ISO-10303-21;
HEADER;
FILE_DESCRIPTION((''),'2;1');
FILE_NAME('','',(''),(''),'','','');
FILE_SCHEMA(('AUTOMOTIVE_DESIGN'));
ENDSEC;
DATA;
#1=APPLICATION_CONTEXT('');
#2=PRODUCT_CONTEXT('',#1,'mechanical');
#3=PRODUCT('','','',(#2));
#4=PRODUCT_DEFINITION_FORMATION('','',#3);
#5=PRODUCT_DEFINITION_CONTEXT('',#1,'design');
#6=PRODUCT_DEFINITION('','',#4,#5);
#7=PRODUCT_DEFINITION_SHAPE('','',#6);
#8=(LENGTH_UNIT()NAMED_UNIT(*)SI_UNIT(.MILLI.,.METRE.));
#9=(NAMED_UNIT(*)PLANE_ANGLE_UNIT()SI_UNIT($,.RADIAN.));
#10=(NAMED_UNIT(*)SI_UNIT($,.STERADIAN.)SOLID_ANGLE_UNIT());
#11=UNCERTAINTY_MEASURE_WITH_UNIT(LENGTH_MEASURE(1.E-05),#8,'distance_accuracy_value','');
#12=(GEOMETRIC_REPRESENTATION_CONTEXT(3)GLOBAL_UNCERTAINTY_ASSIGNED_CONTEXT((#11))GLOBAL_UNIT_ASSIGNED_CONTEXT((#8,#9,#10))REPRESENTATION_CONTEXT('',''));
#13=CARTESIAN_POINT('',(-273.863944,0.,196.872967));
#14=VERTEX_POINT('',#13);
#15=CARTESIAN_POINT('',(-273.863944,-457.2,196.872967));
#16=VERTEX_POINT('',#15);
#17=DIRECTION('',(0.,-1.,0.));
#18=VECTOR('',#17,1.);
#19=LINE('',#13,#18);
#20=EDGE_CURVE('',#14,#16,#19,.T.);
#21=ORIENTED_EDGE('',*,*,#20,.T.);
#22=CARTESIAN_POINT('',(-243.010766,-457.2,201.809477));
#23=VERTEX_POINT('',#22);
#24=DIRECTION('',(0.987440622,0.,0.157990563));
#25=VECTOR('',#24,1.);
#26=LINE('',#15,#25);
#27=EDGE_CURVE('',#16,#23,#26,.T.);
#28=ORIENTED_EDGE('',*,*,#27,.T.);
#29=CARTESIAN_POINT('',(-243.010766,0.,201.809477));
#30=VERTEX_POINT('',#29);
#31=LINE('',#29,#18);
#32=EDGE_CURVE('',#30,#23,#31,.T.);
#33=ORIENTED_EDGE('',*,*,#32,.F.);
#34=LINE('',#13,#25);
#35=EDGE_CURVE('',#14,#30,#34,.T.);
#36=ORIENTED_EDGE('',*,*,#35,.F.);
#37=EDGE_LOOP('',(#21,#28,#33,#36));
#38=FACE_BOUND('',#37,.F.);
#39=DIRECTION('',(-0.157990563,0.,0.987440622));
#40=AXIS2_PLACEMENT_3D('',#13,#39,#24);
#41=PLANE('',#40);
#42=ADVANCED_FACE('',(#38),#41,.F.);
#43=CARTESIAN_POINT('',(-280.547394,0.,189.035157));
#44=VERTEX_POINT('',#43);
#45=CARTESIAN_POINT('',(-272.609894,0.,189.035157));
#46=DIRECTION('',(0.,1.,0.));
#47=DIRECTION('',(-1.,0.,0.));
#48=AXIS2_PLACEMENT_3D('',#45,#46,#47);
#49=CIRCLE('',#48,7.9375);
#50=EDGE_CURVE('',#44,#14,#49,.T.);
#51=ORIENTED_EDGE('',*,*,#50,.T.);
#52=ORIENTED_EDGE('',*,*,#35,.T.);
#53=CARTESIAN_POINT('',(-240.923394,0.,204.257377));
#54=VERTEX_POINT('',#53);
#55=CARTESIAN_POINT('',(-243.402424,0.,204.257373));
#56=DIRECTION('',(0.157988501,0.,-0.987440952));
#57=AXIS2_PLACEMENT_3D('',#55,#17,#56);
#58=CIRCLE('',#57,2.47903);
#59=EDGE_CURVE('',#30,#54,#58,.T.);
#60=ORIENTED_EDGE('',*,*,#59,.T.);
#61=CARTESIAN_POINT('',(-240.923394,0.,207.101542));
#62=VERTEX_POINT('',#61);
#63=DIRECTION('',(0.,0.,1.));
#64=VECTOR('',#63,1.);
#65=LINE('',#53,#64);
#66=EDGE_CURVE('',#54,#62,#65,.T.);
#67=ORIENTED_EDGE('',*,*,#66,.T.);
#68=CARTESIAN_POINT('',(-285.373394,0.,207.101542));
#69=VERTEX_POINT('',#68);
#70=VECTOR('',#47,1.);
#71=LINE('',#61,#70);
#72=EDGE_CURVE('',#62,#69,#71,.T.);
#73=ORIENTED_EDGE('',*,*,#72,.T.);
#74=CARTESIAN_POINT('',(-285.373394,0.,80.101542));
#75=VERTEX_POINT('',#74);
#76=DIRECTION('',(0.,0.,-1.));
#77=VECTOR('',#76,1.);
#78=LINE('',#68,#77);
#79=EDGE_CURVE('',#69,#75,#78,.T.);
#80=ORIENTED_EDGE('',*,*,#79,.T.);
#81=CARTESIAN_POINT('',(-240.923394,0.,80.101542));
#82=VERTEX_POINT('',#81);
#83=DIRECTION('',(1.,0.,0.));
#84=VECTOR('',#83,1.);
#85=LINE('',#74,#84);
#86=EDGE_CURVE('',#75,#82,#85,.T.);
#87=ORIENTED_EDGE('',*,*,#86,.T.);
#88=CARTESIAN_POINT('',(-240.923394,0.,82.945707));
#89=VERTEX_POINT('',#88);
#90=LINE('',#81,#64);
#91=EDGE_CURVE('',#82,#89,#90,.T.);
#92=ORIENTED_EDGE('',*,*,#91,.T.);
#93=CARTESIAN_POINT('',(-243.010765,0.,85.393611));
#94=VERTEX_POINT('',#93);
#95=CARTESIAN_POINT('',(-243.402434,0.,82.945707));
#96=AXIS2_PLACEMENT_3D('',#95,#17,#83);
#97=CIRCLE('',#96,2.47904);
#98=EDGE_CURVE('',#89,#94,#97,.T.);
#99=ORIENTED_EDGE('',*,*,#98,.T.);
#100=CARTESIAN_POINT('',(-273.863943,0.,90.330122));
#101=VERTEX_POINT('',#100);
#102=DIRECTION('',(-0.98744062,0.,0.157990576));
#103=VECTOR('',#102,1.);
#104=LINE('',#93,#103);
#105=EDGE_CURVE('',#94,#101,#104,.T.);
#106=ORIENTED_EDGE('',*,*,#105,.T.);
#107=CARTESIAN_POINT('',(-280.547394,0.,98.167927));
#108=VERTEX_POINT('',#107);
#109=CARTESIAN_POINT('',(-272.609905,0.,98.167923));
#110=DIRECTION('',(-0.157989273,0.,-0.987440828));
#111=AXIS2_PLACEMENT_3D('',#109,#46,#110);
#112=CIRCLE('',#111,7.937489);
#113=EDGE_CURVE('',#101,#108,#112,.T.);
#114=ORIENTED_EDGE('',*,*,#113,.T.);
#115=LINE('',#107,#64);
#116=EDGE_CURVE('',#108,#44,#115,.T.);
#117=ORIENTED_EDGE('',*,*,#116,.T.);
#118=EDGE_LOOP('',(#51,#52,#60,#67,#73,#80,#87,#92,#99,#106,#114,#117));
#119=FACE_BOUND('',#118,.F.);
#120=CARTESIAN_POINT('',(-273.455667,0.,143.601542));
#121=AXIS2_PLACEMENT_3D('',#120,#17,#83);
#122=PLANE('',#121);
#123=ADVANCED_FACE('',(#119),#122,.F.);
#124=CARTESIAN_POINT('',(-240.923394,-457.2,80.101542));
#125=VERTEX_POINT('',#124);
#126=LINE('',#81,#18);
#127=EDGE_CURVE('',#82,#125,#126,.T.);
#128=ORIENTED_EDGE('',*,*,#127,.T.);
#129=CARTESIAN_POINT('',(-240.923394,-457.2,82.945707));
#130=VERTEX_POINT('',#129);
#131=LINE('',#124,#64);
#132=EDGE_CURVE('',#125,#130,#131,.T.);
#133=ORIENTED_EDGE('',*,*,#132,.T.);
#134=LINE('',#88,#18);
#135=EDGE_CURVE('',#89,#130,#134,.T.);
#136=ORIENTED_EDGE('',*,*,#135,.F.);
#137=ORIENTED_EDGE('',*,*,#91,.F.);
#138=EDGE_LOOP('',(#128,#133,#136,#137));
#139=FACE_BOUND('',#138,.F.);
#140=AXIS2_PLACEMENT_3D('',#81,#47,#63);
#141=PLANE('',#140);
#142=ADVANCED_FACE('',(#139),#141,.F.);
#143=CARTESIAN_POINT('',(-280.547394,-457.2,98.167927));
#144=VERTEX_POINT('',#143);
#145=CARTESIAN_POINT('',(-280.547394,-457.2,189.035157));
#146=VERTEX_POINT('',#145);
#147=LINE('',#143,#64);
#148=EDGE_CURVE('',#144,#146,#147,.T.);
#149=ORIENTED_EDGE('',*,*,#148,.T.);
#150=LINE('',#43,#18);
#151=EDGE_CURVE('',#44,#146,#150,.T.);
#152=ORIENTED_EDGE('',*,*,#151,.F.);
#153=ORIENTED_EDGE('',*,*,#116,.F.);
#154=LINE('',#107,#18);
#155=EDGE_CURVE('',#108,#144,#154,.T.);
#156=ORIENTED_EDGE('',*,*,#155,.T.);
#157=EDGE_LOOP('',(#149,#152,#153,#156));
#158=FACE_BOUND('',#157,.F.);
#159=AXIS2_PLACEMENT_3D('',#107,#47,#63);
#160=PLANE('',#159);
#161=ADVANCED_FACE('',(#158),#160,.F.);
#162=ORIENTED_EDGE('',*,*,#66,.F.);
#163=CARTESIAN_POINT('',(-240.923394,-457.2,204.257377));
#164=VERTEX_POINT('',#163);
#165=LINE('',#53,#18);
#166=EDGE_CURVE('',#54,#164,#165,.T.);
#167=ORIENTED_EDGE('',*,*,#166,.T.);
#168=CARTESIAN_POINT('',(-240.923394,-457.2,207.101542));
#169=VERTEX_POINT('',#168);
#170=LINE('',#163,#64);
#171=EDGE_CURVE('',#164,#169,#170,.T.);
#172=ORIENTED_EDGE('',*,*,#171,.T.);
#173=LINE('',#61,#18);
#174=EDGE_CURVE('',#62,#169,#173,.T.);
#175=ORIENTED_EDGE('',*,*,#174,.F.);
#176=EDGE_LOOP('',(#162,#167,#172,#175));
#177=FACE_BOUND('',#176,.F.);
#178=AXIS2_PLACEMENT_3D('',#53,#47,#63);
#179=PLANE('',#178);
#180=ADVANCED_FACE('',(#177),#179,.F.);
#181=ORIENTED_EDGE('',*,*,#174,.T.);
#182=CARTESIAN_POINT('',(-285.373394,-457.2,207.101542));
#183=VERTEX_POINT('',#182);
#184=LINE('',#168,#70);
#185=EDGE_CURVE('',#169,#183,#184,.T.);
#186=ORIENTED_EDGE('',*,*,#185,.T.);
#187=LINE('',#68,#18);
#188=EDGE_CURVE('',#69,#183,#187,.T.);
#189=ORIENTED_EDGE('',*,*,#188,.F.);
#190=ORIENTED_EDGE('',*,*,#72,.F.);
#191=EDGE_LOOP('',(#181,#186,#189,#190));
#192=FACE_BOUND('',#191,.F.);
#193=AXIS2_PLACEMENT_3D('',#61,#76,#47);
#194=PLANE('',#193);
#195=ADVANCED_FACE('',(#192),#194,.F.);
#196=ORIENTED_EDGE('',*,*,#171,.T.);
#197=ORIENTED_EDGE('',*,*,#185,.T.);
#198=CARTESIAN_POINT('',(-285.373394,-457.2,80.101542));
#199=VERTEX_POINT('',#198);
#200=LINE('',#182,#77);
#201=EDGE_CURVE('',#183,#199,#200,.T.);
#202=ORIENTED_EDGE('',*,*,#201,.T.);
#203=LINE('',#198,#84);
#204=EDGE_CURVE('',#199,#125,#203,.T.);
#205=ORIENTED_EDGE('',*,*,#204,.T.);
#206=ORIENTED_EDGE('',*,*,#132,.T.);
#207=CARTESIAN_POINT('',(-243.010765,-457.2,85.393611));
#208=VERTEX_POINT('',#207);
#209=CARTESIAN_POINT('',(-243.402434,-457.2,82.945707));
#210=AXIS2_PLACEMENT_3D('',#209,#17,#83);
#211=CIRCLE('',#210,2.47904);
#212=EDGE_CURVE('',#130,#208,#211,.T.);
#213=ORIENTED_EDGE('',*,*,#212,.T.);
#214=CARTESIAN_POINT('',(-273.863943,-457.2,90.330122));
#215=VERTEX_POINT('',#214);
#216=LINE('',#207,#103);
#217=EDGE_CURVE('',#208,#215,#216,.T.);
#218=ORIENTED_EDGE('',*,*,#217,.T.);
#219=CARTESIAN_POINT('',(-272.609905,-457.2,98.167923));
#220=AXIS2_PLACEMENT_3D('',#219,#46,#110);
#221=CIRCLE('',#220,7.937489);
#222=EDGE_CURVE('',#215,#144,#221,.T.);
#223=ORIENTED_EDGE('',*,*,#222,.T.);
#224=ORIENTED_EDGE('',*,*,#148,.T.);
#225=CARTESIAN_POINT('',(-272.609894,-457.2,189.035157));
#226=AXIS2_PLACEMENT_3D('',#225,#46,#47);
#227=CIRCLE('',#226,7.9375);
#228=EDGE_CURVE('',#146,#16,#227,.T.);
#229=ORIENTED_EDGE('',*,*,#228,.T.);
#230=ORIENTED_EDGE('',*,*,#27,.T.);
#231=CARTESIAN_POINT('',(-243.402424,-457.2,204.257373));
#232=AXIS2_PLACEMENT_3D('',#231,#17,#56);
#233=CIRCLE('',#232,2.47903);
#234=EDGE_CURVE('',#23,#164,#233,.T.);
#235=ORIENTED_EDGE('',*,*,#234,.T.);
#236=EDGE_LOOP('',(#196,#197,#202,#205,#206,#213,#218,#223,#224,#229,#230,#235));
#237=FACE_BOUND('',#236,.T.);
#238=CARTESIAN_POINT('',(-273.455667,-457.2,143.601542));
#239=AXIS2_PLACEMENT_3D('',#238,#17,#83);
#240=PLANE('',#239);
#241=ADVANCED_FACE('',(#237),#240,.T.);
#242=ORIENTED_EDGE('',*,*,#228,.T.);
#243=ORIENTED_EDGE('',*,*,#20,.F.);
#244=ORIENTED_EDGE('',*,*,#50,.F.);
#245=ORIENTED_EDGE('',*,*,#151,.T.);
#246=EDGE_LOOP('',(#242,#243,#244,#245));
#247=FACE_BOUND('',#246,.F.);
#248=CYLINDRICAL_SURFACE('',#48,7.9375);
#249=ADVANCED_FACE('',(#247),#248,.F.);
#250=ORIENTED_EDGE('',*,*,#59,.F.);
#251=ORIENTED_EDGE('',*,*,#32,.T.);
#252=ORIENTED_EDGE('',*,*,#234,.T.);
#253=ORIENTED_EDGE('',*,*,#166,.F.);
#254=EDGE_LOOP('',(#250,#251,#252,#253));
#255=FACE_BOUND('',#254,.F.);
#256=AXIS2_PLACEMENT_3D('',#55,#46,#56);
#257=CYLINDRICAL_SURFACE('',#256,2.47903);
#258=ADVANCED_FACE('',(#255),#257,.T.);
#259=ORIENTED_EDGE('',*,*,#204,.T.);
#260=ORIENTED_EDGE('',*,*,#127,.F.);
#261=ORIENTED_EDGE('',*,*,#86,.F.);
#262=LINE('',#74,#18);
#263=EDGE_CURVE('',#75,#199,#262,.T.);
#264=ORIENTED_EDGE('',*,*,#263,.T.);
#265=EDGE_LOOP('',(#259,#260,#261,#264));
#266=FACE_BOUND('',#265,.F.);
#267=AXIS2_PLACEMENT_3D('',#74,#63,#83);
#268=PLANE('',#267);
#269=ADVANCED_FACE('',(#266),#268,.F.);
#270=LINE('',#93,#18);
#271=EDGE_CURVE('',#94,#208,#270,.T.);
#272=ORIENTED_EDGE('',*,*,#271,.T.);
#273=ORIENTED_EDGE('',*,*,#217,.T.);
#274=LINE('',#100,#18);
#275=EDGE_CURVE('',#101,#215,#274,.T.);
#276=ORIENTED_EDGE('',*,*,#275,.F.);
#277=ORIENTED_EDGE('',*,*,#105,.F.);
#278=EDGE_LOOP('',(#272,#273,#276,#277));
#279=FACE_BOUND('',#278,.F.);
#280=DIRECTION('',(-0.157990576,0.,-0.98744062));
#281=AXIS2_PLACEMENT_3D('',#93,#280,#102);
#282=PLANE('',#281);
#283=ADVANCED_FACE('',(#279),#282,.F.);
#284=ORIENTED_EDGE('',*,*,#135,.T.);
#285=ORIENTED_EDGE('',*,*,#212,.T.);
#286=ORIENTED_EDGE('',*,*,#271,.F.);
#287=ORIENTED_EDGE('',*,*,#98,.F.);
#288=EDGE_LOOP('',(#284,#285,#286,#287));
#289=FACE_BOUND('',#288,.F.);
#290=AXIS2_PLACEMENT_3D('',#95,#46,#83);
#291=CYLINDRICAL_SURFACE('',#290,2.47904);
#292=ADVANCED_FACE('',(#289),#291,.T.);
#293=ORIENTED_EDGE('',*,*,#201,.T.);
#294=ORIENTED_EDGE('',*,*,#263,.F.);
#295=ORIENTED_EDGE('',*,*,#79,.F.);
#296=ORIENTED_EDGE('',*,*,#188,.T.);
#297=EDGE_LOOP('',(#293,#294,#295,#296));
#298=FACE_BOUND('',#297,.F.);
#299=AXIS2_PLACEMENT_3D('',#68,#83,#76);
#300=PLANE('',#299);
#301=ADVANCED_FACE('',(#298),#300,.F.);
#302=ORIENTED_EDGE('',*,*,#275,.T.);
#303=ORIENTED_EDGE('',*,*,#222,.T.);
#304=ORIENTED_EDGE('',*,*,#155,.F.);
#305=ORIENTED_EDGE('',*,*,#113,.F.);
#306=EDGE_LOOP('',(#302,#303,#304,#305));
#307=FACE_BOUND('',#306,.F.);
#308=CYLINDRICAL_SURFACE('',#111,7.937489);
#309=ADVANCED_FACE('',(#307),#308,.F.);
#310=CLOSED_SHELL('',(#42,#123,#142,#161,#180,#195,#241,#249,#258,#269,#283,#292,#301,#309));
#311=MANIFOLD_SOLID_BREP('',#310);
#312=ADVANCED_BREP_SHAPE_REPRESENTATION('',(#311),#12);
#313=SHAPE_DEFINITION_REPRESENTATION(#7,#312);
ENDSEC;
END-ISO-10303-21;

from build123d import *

# Parameters (mm, degrees)
F1_DEPTH = 457.2
F0_W     = 25.4
F0_H     = 49.170082
F0_H_2   = 8.8030812
F0_H_3   = 4.7118778
F0_W_2   = 31.496
F0_H_4   = 25.4
F0_W_3   = 6.5532254
F0_H_5   = 4.729226
F0_H_6   = 8.769477
F0_H_7   = 49.202594
F0_W_4   = 31.3436
F0_W_5   = 9.0424
F0_H_8   = 4.724908
F0_H_9   = 8.777859
F0_H_10  = 49.194466
F0_H_11  = 4.9884076
F0_H_12  = 10.7895644
F0_H_13  = 70.044056
F0_W_6   = 35.56
F0_W_7   = 8.1534
F0_H_14  = 90.86723
F0_H_15  = 12.7743204
F0_H_16  = 5.2920646
F0_W_8   = 39.6239238
F0_W_9   = 8.2550254
F0_H_17  = 7.9246984
F0_H_18  = 11.1253016
F0_H_19  = 88.9
F0_H_20  = 11.1252762
F0_H_21  = 7.9247238
F0_H_22  = 7.9249016
F0_H_23  = 12.7
F0_H_24  = 111.1501968
F0_W_10  = 46.8120476
F0_W_11  = 7.9756762
F0_H_25  = 111.1505778
F0_W_12  = 55.5499016
F0_W_13  = 7.8739238
F0_H_26  = 11.0997238
F0_H_27  = 9.525
F0_H_28  = 11.0996984
F0_H_29  = 111.1503746
F0_W_14  = 43.6878222
F0_W_15  = 11.0999016
F0_W_16  = 66.675
F0_W_17  = 8.0264508
F0_H_30  = 14.2746984
F0_H_31  = 98.4505778
F0_H_32  = 14.2747238
F0_W_18  = 80.2641016
F0_W_19  = 8.6358984
F0_H_33  = 20.6247238
F0_H_34  = 6.35
F0_H_35  = 20.6246984


# Not quite as in the source:
# - ends of sketch curves that miss each other by under 0.0002 mm in the source are joined


with BuildPart() as f1:
    # F0 (on Front) → F1 (new body)
    with BuildSketch(Plane.XZ):
        with BuildLine():
            Line((-601.1868342, 387.2012576), (-601.1868342, 311.0012576))
            Line((-601.1868342, 311.0012576), (-565.3728342, 311.0012576))
            Line((-565.3728342, 311.0012576), (-565.3728342, 313.5336122))
            ThreePointArc((-565.3728342, 313.5336122), (-565.9005539947, 314.9657928472), (-567.2313750211, 315.7131515187))
            Line((-567.2313750211, 315.7131515187), (-592.8587584, 319.8135336))
            ThreePointArc((-592.8587584, 319.8135336), (-595.7302015679, 321.4260723396), (-596.8688342, 324.5162166))
            Line((-596.8688342, 324.5162166), (-596.8688342, 373.6862986))
            ThreePointArc((-596.8688342, 373.6862986), (-595.7302015679, 376.7764428604), (-592.8587590083, 378.388985402))
            Line((-592.8587590083, 378.388985402), (-567.2313776, 382.4893798))
            ThreePointArc((-567.2313776, 382.4893798), (-565.9005539947, 383.2367223528), (-565.3728342, 384.668903))
            Line((-565.3728342, 384.668903), (-565.3728342, 387.2012576))
            Line((-565.3728342, 387.2012576), (-601.1868342, 387.2012576))
        make_face()
    extrude(amount=F1_DEPTH)


with BuildPart() as f1b:
    # F0 (on Front) → F1, piece 2 (new body)
    with BuildSketch(Plane.XZ):
        Polygon((-490.1583542, 311.0012576), (-458.6623542, 311.0012576), (-458.6623542, 336.4012576), (-490.1583542, 336.4012576), (-490.1583542, 315.3192576), align=None)
        Polygon((-494.4763542, 311.0012576), (-490.1583542, 311.0012576), (-490.1583542, 315.3192576), align=None)
        Polygon((-490.1583542, 315.3192576), (-490.1583542, 336.4012576), (-494.4763542, 336.4012576), (-494.4763542, 311.0012576), align=None)
    extrude(amount=F1_DEPTH)


with BuildPart() as f1c:
    # F0 (on Front) → F1, piece 3 (new body)
    with BuildSketch(Plane.XZ):
        with Locations((-369.8588742, 349.1012576)):
            Rectangle(F0_W, F0_H)
        with Locations((-369.8588742, 378.0878392)):
            Rectangle(F0_W, F0_H_2)
        with Locations((-369.8588742, 384.8453187)):
            Rectangle(F0_W, F0_H_3)
        Polygon((-357.1588742, 315.7131354), (-357.1588742, 324.5162166), (-382.5588742, 324.5162166), (-382.5588742, 315.7131354), (-377.8469964, 315.7131354), align=None)
        Polygon((-357.1588742, 311.0012576), (-357.1588742, 315.7131354), (-377.8469964, 315.7131354), (-382.5588742, 311.0012576), align=None)
        Polygon((-377.8469964, 315.7131354), (-382.5588742, 315.7131354), (-382.5588742, 311.0012576), align=None)
    extrude(amount=F1_DEPTH)


with BuildPart() as f1d:
    # F0 (on Front) → F1, piece 4 (new body)
    with BuildSketch(Plane.XZ):
        with BuildLine():
            Line((-282.0713942, 387.2012576), (-282.0713942, 311.0012576))
            Line((-282.0713942, 311.0012576), (-244.2253942, 311.0012576))
            Line((-244.2253942, 311.0012576), (-244.2253942, 313.542934))
            ThreePointArc((-244.2253942, 313.542934), (-244.755053678, 314.9803842916), (-246.0907679772, 315.7304974926))
            Line((-246.0907679772, 315.7304974926), (-271.5081184, 319.7972776))
            ThreePointArc((-271.5081184, 319.7972776), (-274.3795615679, 321.4098163396), (-275.5181942, 324.4999606))
            Line((-275.5181942, 324.4999606), (-275.5181942, 373.7025546))
            ThreePointArc((-275.5181942, 373.7025546), (-274.3795615679, 376.7926988604), (-271.5081190083, 378.405241402))
            Line((-271.5081190083, 378.405241402), (-246.0907702, 382.4720316))
            ThreePointArc((-246.0907702, 382.4720316), (-244.755053678, 383.2221309084), (-244.2253942, 384.6595812))
            Line((-244.2253942, 384.6595812), (-244.2253942, 387.2012576))
            Line((-244.2253942, 387.2012576), (-282.0713942, 387.2012576))
        make_face()
    extrude(amount=F1_DEPTH)


with BuildPart() as f1e:
    # F0 (on Front) → F1, piece 5 (new body)
    with BuildSketch(Plane.XZ):
        with Locations((-153.1612888, 323.7012576)):
            Rectangle(F0_W_2, F0_H_4)
        with Locations((-172.1859015, 323.7012576)):
            Rectangle(F0_W_3, F0_H_4)
    extrude(amount=F1_DEPTH)


with BuildPart() as f1f:
    # F0 (on Front) → F1, piece 6 (new body)
    with BuildSketch(Plane.XZ):
        with Locations((-49.7274342, 384.8366446)):
            Rectangle(F0_W, F0_H_5)
        with Locations((-49.7274342, 378.0872931)):
            Rectangle(F0_W, F0_H_6)
        with Locations((-49.7274342, 349.1012576)):
            Rectangle(F0_W, F0_H_7)
        Polygon((-37.0274342, 324.4999606), (-62.4274342, 324.4999606), (-62.4274342, 315.7304836), (-57.6982082, 315.7304836), (-37.0274342, 315.7304836), align=None)
        Polygon((-57.6982082, 315.7304836), (-62.4274342, 315.7304836), (-62.4274342, 311.0012576), align=None)
        Polygon((-57.6982082, 315.7304836), (-62.4274342, 311.0012576), (-37.0274342, 311.0012576), (-37.0274342, 315.7304836), align=None)
    extrude(amount=F1_DEPTH)


with BuildPart() as f1g:
    # F0 (on Front) → F1, piece 7 (new body)
    with BuildSketch(Plane.XZ):
        with BuildLine():
            Line((36.7900458, 387.2012576), (36.7900458, 311.0012576))
            Line((36.7900458, 311.0012576), (77.1760458, 311.0012576))
            Line((77.1760458, 311.0012576), (77.1760458, 313.5405972))
            ThreePointArc((77.1760458, 313.5405972), (76.6468679067, 314.9767339928), (75.3123701078, 315.7261562738))
            Line((75.3123701078, 315.7261562738), (49.8425216, 319.8013416))
            ThreePointArc((49.8425216, 319.8013416), (46.9710784321, 321.4138803396), (45.8324458, 324.5040246))
            Line((45.8324458, 324.5040246), (45.8324458, 373.6984906))
            ThreePointArc((45.8324458, 373.6984906), (46.9710784321, 376.7886348604), (49.8425209917, 378.401177402))
            Line((49.8425209917, 378.401177402), (75.3123716, 382.4763496))
            ThreePointArc((75.3123716, 382.4763496), (76.6468679067, 383.2257812072), (77.1760458, 384.661918))
            Line((77.1760458, 384.661918), (77.1760458, 387.2012576))
            Line((77.1760458, 387.2012576), (36.7900458, 387.2012576))
        make_face()
    extrude(amount=F1_DEPTH)


with BuildPart() as f1h:
    # F0 (on Front) → F1, piece 8 (new body)
    with BuildSketch(Plane.XZ):
        with Locations((168.2020258, 323.7012576)):
            Rectangle(F0_W_4, F0_H_4)
        with Locations((148.0090258, 323.7012576)):
            Rectangle(F0_W_5, F0_H_4)
    extrude(amount=F1_DEPTH)


with BuildPart() as f1i:
    # F0 (on Front) → F1, piece 9 (new body)
    with BuildSketch(Plane.XZ):
        with Locations((270.4040058, 384.8388036)):
            Rectangle(F0_W, F0_H_8)
        with Locations((270.4040058, 378.0874201)):
            Rectangle(F0_W, F0_H_9)
        with Locations((270.4040058, 349.1012576)):
            Rectangle(F0_W, F0_H_10)
        Polygon((283.1040058, 324.5040246), (257.7040058, 324.5040246), (257.7040058, 315.7261656), (262.4289138, 315.7261656), (283.1040058, 315.7261656), align=None)
        Polygon((262.4289138, 315.7261656), (257.7040058, 315.7261656), (257.7040058, 311.0012576), align=None)
        Polygon((262.4289138, 315.7261656), (257.7040058, 311.0012576), (283.1040058, 311.0012576), (283.1040058, 315.7261656), align=None)
    extrude(amount=F1_DEPTH)


with BuildPart() as f1j:
    # F0 (on Front) → F1, piece 10 (new body)
    with BuildSketch(Plane.XZ):
        with BuildLine():
            Line((356.9976858, 412.6012576), (356.9976858, 311.0012576))
            Line((356.9976858, 311.0012576), (397.2312858, 311.0012576))
            Line((397.2312858, 311.0012576), (397.2312858, 313.6822276))
            ThreePointArc((397.2312858, 313.6822276), (396.6725971949, 315.1984578291), (395.2636770123, 315.9896790272))
            Line((395.2636770123, 315.9896790272), (367.0180366, 320.5089856))
            ThreePointArc((367.0180366, 320.5089856), (363.1894572183, 322.6590436143), (361.6712858, 326.7792296))
            Line((361.6712858, 326.7792296), (361.6712858, 396.8232856))
            ThreePointArc((361.6712858, 396.8232856), (363.1894572183, 400.9434715857), (367.0180362116, 403.0935320276))
            Line((367.0180362116, 403.0935320276), (395.2636748, 407.61285))
            ThreePointArc((395.2636748, 407.61285), (396.6725971949, 408.4040573709), (397.2312858, 409.9202876))
            Line((397.2312858, 409.9202876), (397.2312858, 412.6012576))
            Line((397.2312858, 412.6012576), (356.9976858, 412.6012576))
        make_face()
    extrude(amount=F1_DEPTH)


with BuildPart() as f1k:
    # F0 (on Front) → F1, piece 11 (new body)
    with BuildSketch(Plane.XZ):
        Polygon((468.3817658, 336.4012576), (463.7081658, 336.4012576), (463.7081658, 311.0012576), (468.3817658, 315.6748576), align=None)
        Polygon((503.9417658, 336.4012576), (468.3817658, 336.4012576), (468.3817658, 315.6748576), (468.3817658, 311.0012576), (503.9417658, 311.0012576), align=None)
        Polygon((468.3817658, 315.6748576), (463.7081658, 311.0012576), (468.3817658, 311.0012576), align=None)
    extrude(amount=F1_DEPTH)


with BuildPart() as f1l:
    # F0 (on Front) → F1, piece 12 (new body)
    with BuildSketch(Plane.XZ):
        with Locations((590.5354458, 410.1070538)):
            Rectangle(F0_W, F0_H_11)
        with Locations((590.5354458, 402.2180678)):
            Rectangle(F0_W, F0_H_12)
        with Locations((590.5354458, 361.8012576)):
            Rectangle(F0_W, F0_H_13)
        Polygon((603.2354458, 315.9896652), (603.2354458, 326.7792296), (577.8354458, 326.7792296), (577.8354458, 315.9896652), (582.8238534, 315.9896652), align=None)
        Polygon((603.2354458, 311.0012576), (603.2354458, 315.9896652), (582.8238534, 315.9896652), (577.8354458, 311.0012576), align=None)
        Polygon((577.8354458, 311.0012576), (582.8238534, 315.9896652), (577.8354458, 315.9896652), align=None)
    extrude(amount=F1_DEPTH)


with BuildPart() as f1m:
    # F0 (on Front) → F1, piece 13 (new body)
    with BuildSketch(Plane.XZ):
        with BuildLine():
            ThreePointArc((-591.6363837884, 89.6092671724), (-595.4649627817, 91.7593276143), (-596.9831342, 95.8795136))
            Line((-596.9831342, 95.8795136), (-596.9831342, 165.9235696))
            ThreePointArc((-596.9831342, 165.9235696), (-595.4649627817, 170.0437555857), (-591.6363837884, 172.1938160276))
            Line((-591.6363837884, 172.1938160276), (-563.3907452, 176.713134))
            ThreePointArc((-563.3907452, 176.713134), (-561.9818228051, 177.5043413709), (-561.4231342, 179.0205716))
            Line((-561.4231342, 179.0205716), (-561.4231342, 181.7015416))
            Line((-561.4231342, 181.7015416), (-605.1365342, 181.7015416))
            Line((-605.1365342, 181.7015416), (-605.1365342, 80.1015416))
            Line((-605.1365342, 80.1015416), (-561.4231342, 80.1015416))
            Line((-561.4231342, 80.1015416), (-561.4231342, 82.7825116))
            ThreePointArc((-561.4231342, 82.7825116), (-561.9818228051, 84.2987418291), (-563.3907429877, 85.0899630272))
            Line((-563.3907429877, 85.0899630272), (-591.6363837884, 89.6092671724))
        make_face()
    extrude(amount=F1_DEPTH)


with BuildPart() as f1n:
    # F0 (on Front) → F1, piece 14 (new body)
    with BuildSketch(Plane.XZ):
        with Locations((-472.5053542, 92.8015416)):
            Rectangle(F0_W_6, F0_H_4)
        with Locations((-494.3620542, 92.8015416)):
            Rectangle(F0_W_7, F0_H_4)
    extrude(amount=F1_DEPTH)


with BuildPart() as f1o:
    # F0 (on Front) → F1, piece 15 (new body)
    with BuildSketch(Plane.XZ):
        Polygon((-382.5588742, 80.1015416), (-357.1588742, 80.1015416), (-357.1588742, 85.0899492), (-377.5704666, 85.0899492), align=None)
        Polygon((-382.5588742, 85.0899492), (-382.5588742, 80.1015416), (-377.5704666, 85.0899492), align=None)
        Polygon((-377.5704666, 85.0899492), (-357.1588742, 85.0899492), (-357.1588742, 95.8795136), (-382.5588742, 95.8795136), (-382.5588742, 85.0899492), align=None)
        with Locations((-369.8588742, 130.9015416)):
            Rectangle(F0_W, F0_H_13)
        with Locations((-369.8588742, 171.3183518)):
            Rectangle(F0_W, F0_H_12)
        with Locations((-369.8588742, 179.2073378)):
            Rectangle(F0_W, F0_H_11)
    extrude(amount=F1_DEPTH)


with BuildPart() as f1p:
    # F0 (on Front) → F1, piece 16 (new body)
    with BuildSketch(Plane.XZ):
        with BuildLine():
            Line((-285.3733942, 207.1015416), (-285.3733942, 80.1015416))
            Line((-285.3733942, 80.1015416), (-240.9233942, 80.1015416))
            Line((-240.9233942, 80.1015416), (-240.9233942, 82.9457066))
            ThreePointArc((-240.9233942, 82.9457066), (-241.5160882904, 84.5542271722), (-243.0107654656, 85.3936107901))
            Line((-243.0107654656, 85.3936107901), (-273.863943, 90.3301216))
            ThreePointArc((-273.863943, 90.3301216), (-278.6496758587, 93.0176893467), (-280.5473942, 98.1679266))
            Line((-280.5473942, 98.1679266), (-280.5473942, 189.0351566))
            ThreePointArc((-280.5473942, 189.0351566), (-278.6496758587, 194.1853938533), (-273.8639438025, 196.8729666158))
            Line((-273.8639438025, 196.8729666158), (-243.0107662, 201.809477))
            ThreePointArc((-243.0107662, 201.809477), (-241.5160882904, 202.6488560278), (-240.9233942, 204.2573766))
            Line((-240.9233942, 204.2573766), (-240.9233942, 207.1015416))
            Line((-240.9233942, 207.1015416), (-285.3733942, 207.1015416))
        make_face()
    extrude(amount=F1_DEPTH)


with BuildPart() as f1q:
    # F0 (on Front) → F1, piece 17 (new body)
    with BuildSketch(Plane.XZ):
        Polygon((-173.8369142, 80.1015416), (-134.2129142, 80.1015416), (-134.2129142, 105.5015416), (-173.8369142, 105.5015416), (-173.8369142, 84.9275416), align=None)
        Polygon((-178.6629142, 80.1015416), (-173.8369142, 80.1015416), (-173.8369142, 84.9275416), align=None)
        Polygon((-173.8369142, 84.9275416), (-173.8369142, 105.5015416), (-178.6629142, 105.5015416), (-178.6629142, 80.1015416), align=None)
    extrude(amount=F1_DEPTH)


with BuildPart() as f1r:
    # F0 (on Front) → F1, piece 18 (new body)
    with BuildSketch(Plane.XZ):
        Polygon((-62.4274342, 80.1015416), (-37.0274342, 80.1015416), (-37.0274342, 85.3936062), (-57.1353696, 85.3936062), align=None)
        Polygon((-57.1353696, 85.3936062), (-37.0274342, 85.3936062), (-37.0274342, 98.1679266), (-62.4274342, 98.1679266), (-62.4274342, 85.3936062), align=None)
        Polygon((-62.4274342, 85.3936062), (-62.4274342, 80.1015416), (-57.1353696, 85.3936062), align=None)
        with Locations((-49.7274342, 143.6015416)):
            Rectangle(F0_W, F0_H_14)
        with Locations((-49.7274342, 195.4223168)):
            Rectangle(F0_W, F0_H_15)
        with Locations((-49.7274342, 204.4555093)):
            Rectangle(F0_W, F0_H_16)
    extrude(amount=F1_DEPTH)


with BuildPart() as f1s:
    # F0 (on Front) → F1, piece 19 (new body)
    with BuildSketch(Plane.XZ):
        with BuildLine():
            ThreePointArc((47.9819961975, 90.3301165842), (43.1962641413, 93.0176893467), (41.2985458, 98.1679266))
            Line((41.2985458, 98.1679266), (41.2985458, 189.0351566))
            ThreePointArc((41.2985458, 189.0351566), (43.1962641413, 194.1853938533), (47.9819961975, 196.8729666158))
            Line((47.9819961975, 196.8729666158), (78.8351738, 201.809477))
            ThreePointArc((78.8351738, 201.809477), (80.3298517096, 202.6488560278), (80.9225458, 204.2573766))
            Line((80.9225458, 204.2573766), (80.9225458, 207.1015416))
            Line((80.9225458, 207.1015416), (33.0435458, 207.1015416))
            Line((33.0435458, 207.1015416), (33.0435458, 80.1015416))
            Line((33.0435458, 80.1015416), (80.9225458, 80.1015416))
            Line((80.9225458, 80.1015416), (80.9225458, 82.9457066))
            ThreePointArc((80.9225458, 82.9457066), (80.3298517096, 84.5542271722), (78.8351745344, 85.3936107901))
            Line((78.8351745344, 85.3936107901), (47.9819961975, 90.3301165842))
        make_face()
    extrude(amount=F1_DEPTH)


with BuildPart() as f1t:
    # F0 (on Front) → F1, piece 20 (new body)
    with BuildSketch(Plane.XZ):
        with Locations((167.8083131, 92.8015416)):
            Rectangle(F0_W_8, F0_H_4)
        with Locations((143.8688385, 92.8015416)):
            Rectangle(F0_W_9, F0_H_4)
    extrude(amount=F1_DEPTH)


with BuildPart() as f1u:
    # F0 (on Front) → F1, piece 21 (new body)
    with BuildSketch(Plane.XZ):
        with Locations((270.4040058, 84.0638908)):
            Rectangle(F0_W, F0_H_17)
        with Locations((270.4040058, 93.5888908)):
            Rectangle(F0_W, F0_H_18)
        with Locations((270.4040058, 143.6015416)):
            Rectangle(F0_W, F0_H_19)
        with Locations((270.4040058, 193.6141797)):
            Rectangle(F0_W, F0_H_20)
        with Locations((270.4040058, 203.1391797)):
            Rectangle(F0_W, F0_H_21)
    extrude(amount=F1_DEPTH)


with BuildPart() as f1v:
    # F0 (on Front) → F1, piece 22 (new body)
    with BuildSketch(Plane.XZ):
        with BuildLine():
            ThreePointArc((365.8306401459, 91.025565362), (360.0877523662, 94.2506495524), (357.8104858, 100.4309396))
            Line((357.8104858, 100.4309396), (357.8104858, 212.1721436))
            ThreePointArc((357.8104858, 212.1721436), (360.0877523662, 218.3524336476), (365.8306401459, 221.577517838))
            Line((365.8306401459, 221.577517838), (399.3020462, 226.9329472))
            ThreePointArc((399.3020462, 226.9329472), (400.8748228991, 227.816191046), (401.4984858, 229.5087612))
            Line((401.4984858, 229.5087612), (401.4984858, 232.5015416))
            Line((401.4984858, 232.5015416), (352.7304858, 232.5015416))
            Line((352.7304858, 232.5015416), (352.7304858, 80.1015416))
            Line((352.7304858, 80.1015416), (401.4984858, 80.1015416))
            Line((401.4984858, 80.1015416), (401.4984858, 83.094322))
            ThreePointArc((401.4984858, 83.094322), (400.8748228991, 84.786892154), (399.3020465678, 85.6701382986))
            Line((399.3020465678, 85.6701382986), (365.8306401459, 91.025565362))
        make_face()
    extrude(amount=F1_DEPTH)


with BuildPart() as f1w:
    # F0 (on Front) → F1, piece 23 (new body)
    with BuildSketch(Plane.XZ):
        Polygon((464.5209912, 80.1015416), (508.208915, 80.1015416), (508.208915, 105.5015416), (464.5209912, 105.5015416), (464.5209912, 85.181567), align=None)
        Polygon((459.4409658, 80.1015416), (464.5209912, 80.1015416), (464.5209912, 85.181567), align=None)
        Polygon((464.5209912, 85.181567), (464.5209912, 105.5015416), (459.4409658, 105.5015416), (459.4409658, 80.1015416), align=None)
    extrude(amount=F1_DEPTH)


with BuildPart() as f1x:
    # F0 (on Front) → F1, piece 24 (new body)
    with BuildSketch(Plane.XZ):
        with Locations((590.5354458, 228.5390908)):
            Rectangle(F0_W, F0_H_22)
        with Locations((590.5354458, 218.22664)):
            Rectangle(F0_W, F0_H_23)
        with Locations((590.5354458, 156.3015416)):
            Rectangle(F0_W, F0_H_24)
        with Locations((590.5354458, 94.3764432)):
            Rectangle(F0_W, F0_H_23)
        with Locations((590.5354458, 84.0639924)):
            Rectangle(F0_W, F0_H_22)
    extrude(amount=F1_DEPTH)


with BuildPart() as f1y:
    # F0 (on Front) → F1, piece 25 (new body)
    with BuildSketch(Plane.XZ):
        with BuildLine():
            Line((-609.1116342, 1.6018256), (-609.1116342, -150.7981744))
            Line((-609.1116342, -150.7981744), (-557.4480342, -150.7981744))
            Line((-557.4480342, -150.7981744), (-557.4480342, -147.805394))
            ThreePointArc((-557.4480342, -147.805394), (-558.0716971009, -146.112823846), (-559.6444734322, -145.2295777014))
            Line((-559.6444734322, -145.2295777014), (-593.1158826, -139.8741678))
            ThreePointArc((-593.1158826, -139.8741678), (-598.8587676338, -136.6490664476), (-601.1360342, -130.4687764))
            Line((-601.1360342, -130.4687764), (-601.1360342, -18.7275724))
            ThreePointArc((-601.1360342, -18.7275724), (-598.8587676338, -12.5472823524), (-593.1158798541, -9.322198162))
            Line((-593.1158798541, -9.322198162), (-559.6444738, -3.9667688))
            ThreePointArc((-559.6444738, -3.9667688), (-558.0716971009, -3.083524954), (-557.4480342, -1.3909548))
            Line((-557.4480342, -1.3909548), (-557.4480342, 1.6018256))
            Line((-557.4480342, 1.6018256), (-609.1116342, 1.6018256))
        make_face()
    extrude(amount=F1_DEPTH)


with BuildPart() as f1z:
    # F0 (on Front) → F1, piece 26 (new body)
    with BuildSketch(Plane.XZ):
        with Locations((-472.5942542, -138.0981744)):
            Rectangle(F0_W_10, F0_H_4)
        with Locations((-499.9881161, -138.0981744)):
            Rectangle(F0_W_11, F0_H_4)
    extrude(amount=F1_DEPTH)


with BuildPart() as f1ba:
    # F0 (on Front) → F1, piece 27 (new body)
    with BuildSketch(Plane.XZ):
        with Locations((-369.8588742, -146.8358252)):
            Rectangle(F0_W, F0_H_17)
        with Locations((-369.8588742, -136.523476)):
            Rectangle(F0_W, F0_H_23)
        with Locations((-369.8588742, -74.5981871)):
            Rectangle(F0_W, F0_H_25)
        with Locations((-369.8588742, -12.6728982)):
            Rectangle(F0_W, F0_H_23)
        with Locations((-369.8588742, -2.3605363)):
            Rectangle(F0_W, F0_H_21)
    extrude(amount=F1_DEPTH)


with BuildPart() as f1bb:
    # F0 (on Front) → F1, piece 28 (new body)
    with BuildSketch(Plane.XZ):
        with BuildLine():
            Line((-294.8602942, 1.6018256), (-294.8602942, -150.7981744))
            Line((-294.8602942, -150.7981744), (-231.4364942, -150.7981744))
            Line((-231.4364942, -150.7981744), (-231.4364942, -147.883499))
            ThreePointArc((-231.4364942, -147.883499), (-232.043887476, -146.2350911736), (-233.5756320118, -145.3748972241))
            Line((-233.5756320118, -145.3748972241), (-278.9661426, -138.1124238))
            ThreePointArc((-278.9661426, -138.1124238), (-284.7090276338, -134.8873224476), (-286.9862942, -128.7070324))
            Line((-286.9862942, -128.7070324), (-286.9862942, -20.4893164))
            ThreePointArc((-286.9862942, -20.4893164), (-284.7090276338, -14.3090263524), (-278.9661398541, -11.083942162))
            Line((-278.9661398541, -11.083942162), (-233.5756314, -3.8214554))
            ThreePointArc((-233.5756314, -3.8214554), (-232.043887476, -2.9612576264), (-231.4364942, -1.3128498))
            Line((-231.4364942, -1.3128498), (-231.4364942, 1.6018256))
            Line((-231.4364942, 1.6018256), (-294.8602942, 1.6018256))
        make_face()
    extrude(amount=F1_DEPTH)


with BuildPart() as f1bc:
    # F0 (on Front) → F1, piece 29 (new body)
    with BuildSketch(Plane.XZ):
        with Locations((-152.5009396, -138.0981744)):
            Rectangle(F0_W_12, F0_H_4)
        with Locations((-184.2128523, -138.0981744)):
            Rectangle(F0_W_13, F0_H_4)
    extrude(amount=F1_DEPTH)


with BuildPart() as f1bd:
    # F0 (on Front) → F1, piece 30 (new body)
    with BuildSketch(Plane.XZ):
        with Locations((-49.7274342, -13.4730363)):
            Rectangle(F0_W, F0_H_26)
        with Locations((-49.7274342, -74.5981871)):
            Rectangle(F0_W, F0_H_25)
        with Locations((-49.7274342, -3.1606744)):
            Rectangle(F0_W, F0_H_27)
        with Locations((-49.7274342, -135.7233252)):
            Rectangle(F0_W, F0_H_28)
        with Locations((-49.7274342, -146.0356744)):
            Rectangle(F0_W, F0_H_27)
    extrude(amount=F1_DEPTH)


with BuildPart() as f1be:
    # F0 (on Front) → F1, piece 31 (new body)
    with BuildSketch(Plane.XZ):
        with BuildLine():
            Line((29.5891458, 1.6018256), (29.5891458, -150.7981744))
            Line((29.5891458, -150.7981744), (84.3769458, -150.7981744))
            Line((84.3769458, -150.7981744), (84.3769458, -147.805394))
            ThreePointArc((84.3769458, -147.805394), (83.7532828991, -146.112823846), (82.1805065678, -145.2295777014))
            Line((82.1805065678, -145.2295777014), (48.7090974, -139.8741678))
            ThreePointArc((48.7090974, -139.8741678), (42.9662123662, -136.6490664476), (40.6889458, -130.4687764))
            Line((40.6889458, -130.4687764), (40.6889458, -18.7275724))
            ThreePointArc((40.6889458, -18.7275724), (42.9662123662, -12.5472823524), (48.7091001459, -9.322198162))
            Line((48.7091001459, -9.322198162), (82.1805062, -3.9667688))
            ThreePointArc((82.1805062, -3.9667688), (83.7532828991, -3.083524954), (84.3769458, -1.3909548))
            Line((84.3769458, -1.3909548), (84.3769458, 1.6018256))
            Line((84.3769458, 1.6018256), (29.5891458, 1.6018256))
        make_face()
    extrude(amount=F1_DEPTH)


with BuildPart() as f1bf:
    # F0 (on Front) → F1, piece 32 (new body)
    with BuildSketch(Plane.XZ):
        with Locations((163.6935258, -74.5982633)):
            Rectangle(F0_W, F0_H_29)
        with Locations((163.6935258, -136.5234506)):
            Rectangle(F0_W, F0_H_23)
        with Locations((163.6935258, -12.673076)):
            Rectangle(F0_W, F0_H_23)
        with Locations((163.6935258, -146.8358125)):
            Rectangle(F0_W, F0_H_21)
        with Locations((163.6935258, -2.3606252)):
            Rectangle(F0_W, F0_H_22)
    extrude(amount=F1_DEPTH)


with BuildPart() as f1bg:
    # F0 (on Front) → F1, piece 33 (new body)
    with BuildSketch(Plane.XZ):
        with Locations((275.9412185, -138.0981744)):
            Rectangle(F0_W_14, F0_H_4)
        with Locations((248.5473566, -138.0981744)):
            Rectangle(F0_W_15, F0_H_4)
    extrude(amount=F1_DEPTH)


with BuildPart() as f1bh:
    # F0 (on Front) → F1, piece 34 (new body)
    with BuildSketch(Plane.XZ):
        with BuildLine():
            Line((339.7637858, 1.6018256), (339.7637858, -150.7981744))
            Line((339.7637858, -150.7981744), (414.4651858, -150.7981744))
            Line((414.4651858, -150.7981744), (414.4651858, -146.9369934))
            ThreePointArc((414.4651858, -146.9369934), (413.6605551761, -144.7532950948), (411.6314087753, -143.6137629043))
            Line((411.6314087753, -143.6137629043), (355.8103374, -134.6824078))
            ThreePointArc((355.8103374, -134.6824078), (350.0674523662, -131.4573064476), (347.7901858, -125.2770164))
            Line((347.7901858, -125.2770164), (347.7901858, -23.9193324))
            ThreePointArc((347.7901858, -23.9193324), (350.0674523662, -17.7390423524), (355.8103401459, -14.513958162))
            Line((355.8103401459, -14.513958162), (411.6314094, -5.5825898))
            ThreePointArc((411.6314094, -5.5825898), (413.6605551761, -4.4430537052), (414.4651858, -2.2593554))
            Line((414.4651858, -2.2593554), (414.4651858, 1.6018256))
            Line((414.4651858, 1.6018256), (339.7637858, 1.6018256))
        make_face()
    extrude(amount=F1_DEPTH)


with BuildPart() as f1bi:
    # F0 (on Front) → F1, piece 35 (new body)
    with BuildSketch(Plane.XZ):
        with Locations((487.8382166, -138.0981744)):
            Rectangle(F0_W_16, F0_H_4)
        with Locations((450.4874912, -138.0981744)):
            Rectangle(F0_W_17, F0_H_4)
    extrude(amount=F1_DEPTH)


with BuildPart() as f1bj:
    # F0 (on Front) → F1, piece 36 (new body)
    with BuildSketch(Plane.XZ):
        with Locations((590.5354458, -144.4481744)):
            Rectangle(F0_W, F0_H_23)
        with Locations((590.5354458, -130.9608252)):
            Rectangle(F0_W, F0_H_30)
        with Locations((590.5354458, -74.5981871)):
            Rectangle(F0_W, F0_H_31)
        with Locations((590.5354458, -18.2355363)):
            Rectangle(F0_W, F0_H_32)
        with Locations((590.5354458, -4.7481744)):
            Rectangle(F0_W, F0_H_23)
    extrude(amount=F1_DEPTH)


with BuildPart() as f1bk:
    # F0 (on Front) → F1, piece 37 (new body)
    with BuildSketch(Plane.XZ):
        with BuildLine():
            Line((-621.3798342, -229.2978904), (-621.3798342, -381.6978904))
            Line((-621.3798342, -381.6978904), (-545.1798342, -381.6978904))
            Line((-545.1798342, -381.6978904), (-545.1798342, -377.8367094))
            ThreePointArc((-545.1798342, -377.8367094), (-545.9844648239, -375.6530110948), (-548.0136112247, -374.5134789043))
            Line((-548.0136112247, -374.5134789043), (-603.8346826, -365.5821238))
            ThreePointArc((-603.8346826, -365.5821238), (-609.5775676338, -362.3570224476), (-611.8548342, -356.1767324))
            Line((-611.8548342, -356.1767324), (-611.8548342, -254.8190484))
            ThreePointArc((-611.8548342, -254.8190484), (-609.5775676338, -248.6387583524), (-603.8346798541, -245.413674162))
            Line((-603.8346798541, -245.413674162), (-548.0136106, -236.4823058))
            ThreePointArc((-548.0136106, -236.4823058), (-545.9844648239, -235.3427697052), (-545.1798342, -233.1590714))
            Line((-545.1798342, -233.1590714), (-545.1798342, -229.2978904))
            Line((-545.1798342, -229.2978904), (-621.3798342, -229.2978904))
        make_face()
    extrude(amount=F1_DEPTH)


with BuildPart() as f1bl:
    # F0 (on Front) → F1, piece 38 (new body)
    with BuildSketch(Plane.XZ):
        with Locations((-472.264105, -368.9978904)):
            Rectangle(F0_W_18, F0_H_4)
        with Locations((-516.714105, -368.9978904)):
            Rectangle(F0_W_19, F0_H_4)
    extrude(amount=F1_DEPTH)


with BuildPart() as f1bm:
    # F0 (on Front) → F1, piece 39 (new body)
    with BuildSketch(Plane.XZ):
        with Locations((-369.8588742, -245.9602523)):
            Rectangle(F0_W, F0_H_33)
        with Locations((-369.8588742, -305.4979031)):
            Rectangle(F0_W, F0_H_31)
        with Locations((-369.8588742, -232.4728904)):
            Rectangle(F0_W, F0_H_34)
        with Locations((-369.8588742, -365.0355412)):
            Rectangle(F0_W, F0_H_35)
        with Locations((-369.8588742, -378.5228904)):
            Rectangle(F0_W, F0_H_34)
    extrude(amount=F1_DEPTH)


solid = f1p.part
